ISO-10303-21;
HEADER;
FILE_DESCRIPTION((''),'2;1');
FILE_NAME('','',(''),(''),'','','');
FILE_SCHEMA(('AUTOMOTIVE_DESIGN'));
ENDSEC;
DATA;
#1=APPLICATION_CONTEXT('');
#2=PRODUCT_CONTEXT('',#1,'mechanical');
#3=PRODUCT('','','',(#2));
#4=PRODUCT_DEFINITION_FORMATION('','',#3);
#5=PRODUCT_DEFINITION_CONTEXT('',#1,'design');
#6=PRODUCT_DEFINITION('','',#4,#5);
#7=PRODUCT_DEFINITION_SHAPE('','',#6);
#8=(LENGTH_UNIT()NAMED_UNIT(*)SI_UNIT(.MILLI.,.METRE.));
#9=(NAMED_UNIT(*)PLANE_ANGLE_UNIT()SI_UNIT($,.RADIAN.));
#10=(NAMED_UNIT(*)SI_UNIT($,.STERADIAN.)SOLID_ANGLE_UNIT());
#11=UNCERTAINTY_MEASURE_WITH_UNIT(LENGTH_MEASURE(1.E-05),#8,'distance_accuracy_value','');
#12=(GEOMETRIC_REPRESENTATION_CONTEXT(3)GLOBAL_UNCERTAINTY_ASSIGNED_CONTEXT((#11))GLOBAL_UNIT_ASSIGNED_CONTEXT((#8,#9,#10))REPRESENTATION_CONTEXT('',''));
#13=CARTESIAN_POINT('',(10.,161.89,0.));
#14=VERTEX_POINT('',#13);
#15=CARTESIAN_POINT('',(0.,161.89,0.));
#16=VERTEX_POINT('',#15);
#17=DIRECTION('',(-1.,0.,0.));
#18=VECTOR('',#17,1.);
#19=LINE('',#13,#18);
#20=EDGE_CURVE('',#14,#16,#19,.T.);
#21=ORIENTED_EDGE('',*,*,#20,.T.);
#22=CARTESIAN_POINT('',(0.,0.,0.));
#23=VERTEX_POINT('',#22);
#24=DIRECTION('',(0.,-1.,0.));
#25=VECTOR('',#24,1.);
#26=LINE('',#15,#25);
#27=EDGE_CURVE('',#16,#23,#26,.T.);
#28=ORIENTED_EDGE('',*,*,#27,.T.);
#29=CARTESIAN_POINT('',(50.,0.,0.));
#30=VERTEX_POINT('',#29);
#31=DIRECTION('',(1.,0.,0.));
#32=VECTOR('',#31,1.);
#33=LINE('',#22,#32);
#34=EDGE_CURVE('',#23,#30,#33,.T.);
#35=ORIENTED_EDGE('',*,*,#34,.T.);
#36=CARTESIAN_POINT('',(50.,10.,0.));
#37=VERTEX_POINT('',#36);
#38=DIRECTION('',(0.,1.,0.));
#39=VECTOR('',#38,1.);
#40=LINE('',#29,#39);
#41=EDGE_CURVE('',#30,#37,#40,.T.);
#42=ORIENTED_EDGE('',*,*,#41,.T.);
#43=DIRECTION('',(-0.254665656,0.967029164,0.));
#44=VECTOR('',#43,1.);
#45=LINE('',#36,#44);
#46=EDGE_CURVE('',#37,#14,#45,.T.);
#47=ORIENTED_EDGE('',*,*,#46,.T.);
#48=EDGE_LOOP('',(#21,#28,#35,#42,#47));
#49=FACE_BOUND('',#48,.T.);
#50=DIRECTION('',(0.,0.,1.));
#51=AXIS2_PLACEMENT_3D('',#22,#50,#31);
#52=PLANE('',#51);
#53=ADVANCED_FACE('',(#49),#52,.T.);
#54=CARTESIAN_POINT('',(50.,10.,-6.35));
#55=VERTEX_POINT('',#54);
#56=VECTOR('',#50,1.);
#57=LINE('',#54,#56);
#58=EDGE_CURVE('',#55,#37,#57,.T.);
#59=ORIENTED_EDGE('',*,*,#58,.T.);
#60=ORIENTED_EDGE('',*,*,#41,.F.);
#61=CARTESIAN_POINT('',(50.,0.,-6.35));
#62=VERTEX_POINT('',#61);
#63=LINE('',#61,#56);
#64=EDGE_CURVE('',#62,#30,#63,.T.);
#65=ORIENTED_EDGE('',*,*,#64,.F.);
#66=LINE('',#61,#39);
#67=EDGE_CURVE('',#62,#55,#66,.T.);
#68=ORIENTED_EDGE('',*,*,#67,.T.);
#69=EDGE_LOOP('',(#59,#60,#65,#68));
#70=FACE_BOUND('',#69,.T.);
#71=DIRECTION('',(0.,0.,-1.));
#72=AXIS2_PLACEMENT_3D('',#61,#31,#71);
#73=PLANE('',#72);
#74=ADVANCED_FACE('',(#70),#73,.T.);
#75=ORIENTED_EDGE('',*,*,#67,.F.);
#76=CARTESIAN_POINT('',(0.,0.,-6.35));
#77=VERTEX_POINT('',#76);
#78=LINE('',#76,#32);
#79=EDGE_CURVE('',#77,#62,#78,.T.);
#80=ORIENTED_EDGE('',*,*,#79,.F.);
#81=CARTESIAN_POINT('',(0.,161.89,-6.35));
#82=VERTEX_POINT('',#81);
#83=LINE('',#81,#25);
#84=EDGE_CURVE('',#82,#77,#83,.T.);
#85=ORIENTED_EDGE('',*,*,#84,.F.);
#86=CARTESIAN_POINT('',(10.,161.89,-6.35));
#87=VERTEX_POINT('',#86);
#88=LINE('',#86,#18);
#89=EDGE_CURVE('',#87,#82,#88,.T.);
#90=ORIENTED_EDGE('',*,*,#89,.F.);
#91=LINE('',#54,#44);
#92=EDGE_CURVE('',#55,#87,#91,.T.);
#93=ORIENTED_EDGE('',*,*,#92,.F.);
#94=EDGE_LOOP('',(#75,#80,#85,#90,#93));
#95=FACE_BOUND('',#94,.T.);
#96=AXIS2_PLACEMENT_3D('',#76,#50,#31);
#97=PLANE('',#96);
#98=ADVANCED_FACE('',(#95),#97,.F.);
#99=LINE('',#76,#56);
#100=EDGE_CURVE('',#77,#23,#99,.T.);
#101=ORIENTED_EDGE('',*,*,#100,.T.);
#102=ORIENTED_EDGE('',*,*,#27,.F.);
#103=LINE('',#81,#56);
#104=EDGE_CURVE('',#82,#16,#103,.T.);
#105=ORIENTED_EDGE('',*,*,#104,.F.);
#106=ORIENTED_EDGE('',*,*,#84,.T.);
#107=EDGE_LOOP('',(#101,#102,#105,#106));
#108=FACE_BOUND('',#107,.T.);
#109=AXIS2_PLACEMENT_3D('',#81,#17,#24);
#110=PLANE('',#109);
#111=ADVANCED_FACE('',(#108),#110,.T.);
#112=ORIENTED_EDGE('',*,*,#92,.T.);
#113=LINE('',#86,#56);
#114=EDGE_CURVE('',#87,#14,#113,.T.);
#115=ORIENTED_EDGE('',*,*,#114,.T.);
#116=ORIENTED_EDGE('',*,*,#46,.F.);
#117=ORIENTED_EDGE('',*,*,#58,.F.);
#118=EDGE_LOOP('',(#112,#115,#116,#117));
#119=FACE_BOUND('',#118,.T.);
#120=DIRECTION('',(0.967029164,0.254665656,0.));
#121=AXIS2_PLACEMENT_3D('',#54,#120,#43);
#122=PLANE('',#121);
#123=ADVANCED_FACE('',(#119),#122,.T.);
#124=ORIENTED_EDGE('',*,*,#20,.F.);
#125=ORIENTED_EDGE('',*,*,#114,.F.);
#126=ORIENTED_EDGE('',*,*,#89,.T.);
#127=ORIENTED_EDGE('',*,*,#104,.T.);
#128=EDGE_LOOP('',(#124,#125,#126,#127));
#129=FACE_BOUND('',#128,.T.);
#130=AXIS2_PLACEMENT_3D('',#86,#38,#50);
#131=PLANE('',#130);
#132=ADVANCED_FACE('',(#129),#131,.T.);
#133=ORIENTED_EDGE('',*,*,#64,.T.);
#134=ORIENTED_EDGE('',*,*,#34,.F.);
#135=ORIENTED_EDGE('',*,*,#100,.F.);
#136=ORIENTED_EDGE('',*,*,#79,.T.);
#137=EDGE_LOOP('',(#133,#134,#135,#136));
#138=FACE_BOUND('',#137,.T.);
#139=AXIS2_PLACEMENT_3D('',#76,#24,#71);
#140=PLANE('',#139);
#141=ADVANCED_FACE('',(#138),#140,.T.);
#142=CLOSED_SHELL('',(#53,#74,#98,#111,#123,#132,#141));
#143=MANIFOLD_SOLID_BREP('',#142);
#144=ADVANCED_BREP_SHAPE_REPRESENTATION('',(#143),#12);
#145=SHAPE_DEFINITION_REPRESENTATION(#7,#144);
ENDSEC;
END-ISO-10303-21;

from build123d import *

# Parameters (mm, degrees)
FLANGE_BASE1_DEPTH = 6.35


# Sheet-metal steps are written as plain solids
with BuildPart() as part:
    # Esboço1 → Flange-base1 (new body)
    with BuildSketch(Plane.XY):
        Polygon((0, 0), (50, 0), (50, 10), (10, 161.89), (0, 161.89), align=None)
    extrude(amount=-FLANGE_BASE1_DEPTH)


solid = part.part
